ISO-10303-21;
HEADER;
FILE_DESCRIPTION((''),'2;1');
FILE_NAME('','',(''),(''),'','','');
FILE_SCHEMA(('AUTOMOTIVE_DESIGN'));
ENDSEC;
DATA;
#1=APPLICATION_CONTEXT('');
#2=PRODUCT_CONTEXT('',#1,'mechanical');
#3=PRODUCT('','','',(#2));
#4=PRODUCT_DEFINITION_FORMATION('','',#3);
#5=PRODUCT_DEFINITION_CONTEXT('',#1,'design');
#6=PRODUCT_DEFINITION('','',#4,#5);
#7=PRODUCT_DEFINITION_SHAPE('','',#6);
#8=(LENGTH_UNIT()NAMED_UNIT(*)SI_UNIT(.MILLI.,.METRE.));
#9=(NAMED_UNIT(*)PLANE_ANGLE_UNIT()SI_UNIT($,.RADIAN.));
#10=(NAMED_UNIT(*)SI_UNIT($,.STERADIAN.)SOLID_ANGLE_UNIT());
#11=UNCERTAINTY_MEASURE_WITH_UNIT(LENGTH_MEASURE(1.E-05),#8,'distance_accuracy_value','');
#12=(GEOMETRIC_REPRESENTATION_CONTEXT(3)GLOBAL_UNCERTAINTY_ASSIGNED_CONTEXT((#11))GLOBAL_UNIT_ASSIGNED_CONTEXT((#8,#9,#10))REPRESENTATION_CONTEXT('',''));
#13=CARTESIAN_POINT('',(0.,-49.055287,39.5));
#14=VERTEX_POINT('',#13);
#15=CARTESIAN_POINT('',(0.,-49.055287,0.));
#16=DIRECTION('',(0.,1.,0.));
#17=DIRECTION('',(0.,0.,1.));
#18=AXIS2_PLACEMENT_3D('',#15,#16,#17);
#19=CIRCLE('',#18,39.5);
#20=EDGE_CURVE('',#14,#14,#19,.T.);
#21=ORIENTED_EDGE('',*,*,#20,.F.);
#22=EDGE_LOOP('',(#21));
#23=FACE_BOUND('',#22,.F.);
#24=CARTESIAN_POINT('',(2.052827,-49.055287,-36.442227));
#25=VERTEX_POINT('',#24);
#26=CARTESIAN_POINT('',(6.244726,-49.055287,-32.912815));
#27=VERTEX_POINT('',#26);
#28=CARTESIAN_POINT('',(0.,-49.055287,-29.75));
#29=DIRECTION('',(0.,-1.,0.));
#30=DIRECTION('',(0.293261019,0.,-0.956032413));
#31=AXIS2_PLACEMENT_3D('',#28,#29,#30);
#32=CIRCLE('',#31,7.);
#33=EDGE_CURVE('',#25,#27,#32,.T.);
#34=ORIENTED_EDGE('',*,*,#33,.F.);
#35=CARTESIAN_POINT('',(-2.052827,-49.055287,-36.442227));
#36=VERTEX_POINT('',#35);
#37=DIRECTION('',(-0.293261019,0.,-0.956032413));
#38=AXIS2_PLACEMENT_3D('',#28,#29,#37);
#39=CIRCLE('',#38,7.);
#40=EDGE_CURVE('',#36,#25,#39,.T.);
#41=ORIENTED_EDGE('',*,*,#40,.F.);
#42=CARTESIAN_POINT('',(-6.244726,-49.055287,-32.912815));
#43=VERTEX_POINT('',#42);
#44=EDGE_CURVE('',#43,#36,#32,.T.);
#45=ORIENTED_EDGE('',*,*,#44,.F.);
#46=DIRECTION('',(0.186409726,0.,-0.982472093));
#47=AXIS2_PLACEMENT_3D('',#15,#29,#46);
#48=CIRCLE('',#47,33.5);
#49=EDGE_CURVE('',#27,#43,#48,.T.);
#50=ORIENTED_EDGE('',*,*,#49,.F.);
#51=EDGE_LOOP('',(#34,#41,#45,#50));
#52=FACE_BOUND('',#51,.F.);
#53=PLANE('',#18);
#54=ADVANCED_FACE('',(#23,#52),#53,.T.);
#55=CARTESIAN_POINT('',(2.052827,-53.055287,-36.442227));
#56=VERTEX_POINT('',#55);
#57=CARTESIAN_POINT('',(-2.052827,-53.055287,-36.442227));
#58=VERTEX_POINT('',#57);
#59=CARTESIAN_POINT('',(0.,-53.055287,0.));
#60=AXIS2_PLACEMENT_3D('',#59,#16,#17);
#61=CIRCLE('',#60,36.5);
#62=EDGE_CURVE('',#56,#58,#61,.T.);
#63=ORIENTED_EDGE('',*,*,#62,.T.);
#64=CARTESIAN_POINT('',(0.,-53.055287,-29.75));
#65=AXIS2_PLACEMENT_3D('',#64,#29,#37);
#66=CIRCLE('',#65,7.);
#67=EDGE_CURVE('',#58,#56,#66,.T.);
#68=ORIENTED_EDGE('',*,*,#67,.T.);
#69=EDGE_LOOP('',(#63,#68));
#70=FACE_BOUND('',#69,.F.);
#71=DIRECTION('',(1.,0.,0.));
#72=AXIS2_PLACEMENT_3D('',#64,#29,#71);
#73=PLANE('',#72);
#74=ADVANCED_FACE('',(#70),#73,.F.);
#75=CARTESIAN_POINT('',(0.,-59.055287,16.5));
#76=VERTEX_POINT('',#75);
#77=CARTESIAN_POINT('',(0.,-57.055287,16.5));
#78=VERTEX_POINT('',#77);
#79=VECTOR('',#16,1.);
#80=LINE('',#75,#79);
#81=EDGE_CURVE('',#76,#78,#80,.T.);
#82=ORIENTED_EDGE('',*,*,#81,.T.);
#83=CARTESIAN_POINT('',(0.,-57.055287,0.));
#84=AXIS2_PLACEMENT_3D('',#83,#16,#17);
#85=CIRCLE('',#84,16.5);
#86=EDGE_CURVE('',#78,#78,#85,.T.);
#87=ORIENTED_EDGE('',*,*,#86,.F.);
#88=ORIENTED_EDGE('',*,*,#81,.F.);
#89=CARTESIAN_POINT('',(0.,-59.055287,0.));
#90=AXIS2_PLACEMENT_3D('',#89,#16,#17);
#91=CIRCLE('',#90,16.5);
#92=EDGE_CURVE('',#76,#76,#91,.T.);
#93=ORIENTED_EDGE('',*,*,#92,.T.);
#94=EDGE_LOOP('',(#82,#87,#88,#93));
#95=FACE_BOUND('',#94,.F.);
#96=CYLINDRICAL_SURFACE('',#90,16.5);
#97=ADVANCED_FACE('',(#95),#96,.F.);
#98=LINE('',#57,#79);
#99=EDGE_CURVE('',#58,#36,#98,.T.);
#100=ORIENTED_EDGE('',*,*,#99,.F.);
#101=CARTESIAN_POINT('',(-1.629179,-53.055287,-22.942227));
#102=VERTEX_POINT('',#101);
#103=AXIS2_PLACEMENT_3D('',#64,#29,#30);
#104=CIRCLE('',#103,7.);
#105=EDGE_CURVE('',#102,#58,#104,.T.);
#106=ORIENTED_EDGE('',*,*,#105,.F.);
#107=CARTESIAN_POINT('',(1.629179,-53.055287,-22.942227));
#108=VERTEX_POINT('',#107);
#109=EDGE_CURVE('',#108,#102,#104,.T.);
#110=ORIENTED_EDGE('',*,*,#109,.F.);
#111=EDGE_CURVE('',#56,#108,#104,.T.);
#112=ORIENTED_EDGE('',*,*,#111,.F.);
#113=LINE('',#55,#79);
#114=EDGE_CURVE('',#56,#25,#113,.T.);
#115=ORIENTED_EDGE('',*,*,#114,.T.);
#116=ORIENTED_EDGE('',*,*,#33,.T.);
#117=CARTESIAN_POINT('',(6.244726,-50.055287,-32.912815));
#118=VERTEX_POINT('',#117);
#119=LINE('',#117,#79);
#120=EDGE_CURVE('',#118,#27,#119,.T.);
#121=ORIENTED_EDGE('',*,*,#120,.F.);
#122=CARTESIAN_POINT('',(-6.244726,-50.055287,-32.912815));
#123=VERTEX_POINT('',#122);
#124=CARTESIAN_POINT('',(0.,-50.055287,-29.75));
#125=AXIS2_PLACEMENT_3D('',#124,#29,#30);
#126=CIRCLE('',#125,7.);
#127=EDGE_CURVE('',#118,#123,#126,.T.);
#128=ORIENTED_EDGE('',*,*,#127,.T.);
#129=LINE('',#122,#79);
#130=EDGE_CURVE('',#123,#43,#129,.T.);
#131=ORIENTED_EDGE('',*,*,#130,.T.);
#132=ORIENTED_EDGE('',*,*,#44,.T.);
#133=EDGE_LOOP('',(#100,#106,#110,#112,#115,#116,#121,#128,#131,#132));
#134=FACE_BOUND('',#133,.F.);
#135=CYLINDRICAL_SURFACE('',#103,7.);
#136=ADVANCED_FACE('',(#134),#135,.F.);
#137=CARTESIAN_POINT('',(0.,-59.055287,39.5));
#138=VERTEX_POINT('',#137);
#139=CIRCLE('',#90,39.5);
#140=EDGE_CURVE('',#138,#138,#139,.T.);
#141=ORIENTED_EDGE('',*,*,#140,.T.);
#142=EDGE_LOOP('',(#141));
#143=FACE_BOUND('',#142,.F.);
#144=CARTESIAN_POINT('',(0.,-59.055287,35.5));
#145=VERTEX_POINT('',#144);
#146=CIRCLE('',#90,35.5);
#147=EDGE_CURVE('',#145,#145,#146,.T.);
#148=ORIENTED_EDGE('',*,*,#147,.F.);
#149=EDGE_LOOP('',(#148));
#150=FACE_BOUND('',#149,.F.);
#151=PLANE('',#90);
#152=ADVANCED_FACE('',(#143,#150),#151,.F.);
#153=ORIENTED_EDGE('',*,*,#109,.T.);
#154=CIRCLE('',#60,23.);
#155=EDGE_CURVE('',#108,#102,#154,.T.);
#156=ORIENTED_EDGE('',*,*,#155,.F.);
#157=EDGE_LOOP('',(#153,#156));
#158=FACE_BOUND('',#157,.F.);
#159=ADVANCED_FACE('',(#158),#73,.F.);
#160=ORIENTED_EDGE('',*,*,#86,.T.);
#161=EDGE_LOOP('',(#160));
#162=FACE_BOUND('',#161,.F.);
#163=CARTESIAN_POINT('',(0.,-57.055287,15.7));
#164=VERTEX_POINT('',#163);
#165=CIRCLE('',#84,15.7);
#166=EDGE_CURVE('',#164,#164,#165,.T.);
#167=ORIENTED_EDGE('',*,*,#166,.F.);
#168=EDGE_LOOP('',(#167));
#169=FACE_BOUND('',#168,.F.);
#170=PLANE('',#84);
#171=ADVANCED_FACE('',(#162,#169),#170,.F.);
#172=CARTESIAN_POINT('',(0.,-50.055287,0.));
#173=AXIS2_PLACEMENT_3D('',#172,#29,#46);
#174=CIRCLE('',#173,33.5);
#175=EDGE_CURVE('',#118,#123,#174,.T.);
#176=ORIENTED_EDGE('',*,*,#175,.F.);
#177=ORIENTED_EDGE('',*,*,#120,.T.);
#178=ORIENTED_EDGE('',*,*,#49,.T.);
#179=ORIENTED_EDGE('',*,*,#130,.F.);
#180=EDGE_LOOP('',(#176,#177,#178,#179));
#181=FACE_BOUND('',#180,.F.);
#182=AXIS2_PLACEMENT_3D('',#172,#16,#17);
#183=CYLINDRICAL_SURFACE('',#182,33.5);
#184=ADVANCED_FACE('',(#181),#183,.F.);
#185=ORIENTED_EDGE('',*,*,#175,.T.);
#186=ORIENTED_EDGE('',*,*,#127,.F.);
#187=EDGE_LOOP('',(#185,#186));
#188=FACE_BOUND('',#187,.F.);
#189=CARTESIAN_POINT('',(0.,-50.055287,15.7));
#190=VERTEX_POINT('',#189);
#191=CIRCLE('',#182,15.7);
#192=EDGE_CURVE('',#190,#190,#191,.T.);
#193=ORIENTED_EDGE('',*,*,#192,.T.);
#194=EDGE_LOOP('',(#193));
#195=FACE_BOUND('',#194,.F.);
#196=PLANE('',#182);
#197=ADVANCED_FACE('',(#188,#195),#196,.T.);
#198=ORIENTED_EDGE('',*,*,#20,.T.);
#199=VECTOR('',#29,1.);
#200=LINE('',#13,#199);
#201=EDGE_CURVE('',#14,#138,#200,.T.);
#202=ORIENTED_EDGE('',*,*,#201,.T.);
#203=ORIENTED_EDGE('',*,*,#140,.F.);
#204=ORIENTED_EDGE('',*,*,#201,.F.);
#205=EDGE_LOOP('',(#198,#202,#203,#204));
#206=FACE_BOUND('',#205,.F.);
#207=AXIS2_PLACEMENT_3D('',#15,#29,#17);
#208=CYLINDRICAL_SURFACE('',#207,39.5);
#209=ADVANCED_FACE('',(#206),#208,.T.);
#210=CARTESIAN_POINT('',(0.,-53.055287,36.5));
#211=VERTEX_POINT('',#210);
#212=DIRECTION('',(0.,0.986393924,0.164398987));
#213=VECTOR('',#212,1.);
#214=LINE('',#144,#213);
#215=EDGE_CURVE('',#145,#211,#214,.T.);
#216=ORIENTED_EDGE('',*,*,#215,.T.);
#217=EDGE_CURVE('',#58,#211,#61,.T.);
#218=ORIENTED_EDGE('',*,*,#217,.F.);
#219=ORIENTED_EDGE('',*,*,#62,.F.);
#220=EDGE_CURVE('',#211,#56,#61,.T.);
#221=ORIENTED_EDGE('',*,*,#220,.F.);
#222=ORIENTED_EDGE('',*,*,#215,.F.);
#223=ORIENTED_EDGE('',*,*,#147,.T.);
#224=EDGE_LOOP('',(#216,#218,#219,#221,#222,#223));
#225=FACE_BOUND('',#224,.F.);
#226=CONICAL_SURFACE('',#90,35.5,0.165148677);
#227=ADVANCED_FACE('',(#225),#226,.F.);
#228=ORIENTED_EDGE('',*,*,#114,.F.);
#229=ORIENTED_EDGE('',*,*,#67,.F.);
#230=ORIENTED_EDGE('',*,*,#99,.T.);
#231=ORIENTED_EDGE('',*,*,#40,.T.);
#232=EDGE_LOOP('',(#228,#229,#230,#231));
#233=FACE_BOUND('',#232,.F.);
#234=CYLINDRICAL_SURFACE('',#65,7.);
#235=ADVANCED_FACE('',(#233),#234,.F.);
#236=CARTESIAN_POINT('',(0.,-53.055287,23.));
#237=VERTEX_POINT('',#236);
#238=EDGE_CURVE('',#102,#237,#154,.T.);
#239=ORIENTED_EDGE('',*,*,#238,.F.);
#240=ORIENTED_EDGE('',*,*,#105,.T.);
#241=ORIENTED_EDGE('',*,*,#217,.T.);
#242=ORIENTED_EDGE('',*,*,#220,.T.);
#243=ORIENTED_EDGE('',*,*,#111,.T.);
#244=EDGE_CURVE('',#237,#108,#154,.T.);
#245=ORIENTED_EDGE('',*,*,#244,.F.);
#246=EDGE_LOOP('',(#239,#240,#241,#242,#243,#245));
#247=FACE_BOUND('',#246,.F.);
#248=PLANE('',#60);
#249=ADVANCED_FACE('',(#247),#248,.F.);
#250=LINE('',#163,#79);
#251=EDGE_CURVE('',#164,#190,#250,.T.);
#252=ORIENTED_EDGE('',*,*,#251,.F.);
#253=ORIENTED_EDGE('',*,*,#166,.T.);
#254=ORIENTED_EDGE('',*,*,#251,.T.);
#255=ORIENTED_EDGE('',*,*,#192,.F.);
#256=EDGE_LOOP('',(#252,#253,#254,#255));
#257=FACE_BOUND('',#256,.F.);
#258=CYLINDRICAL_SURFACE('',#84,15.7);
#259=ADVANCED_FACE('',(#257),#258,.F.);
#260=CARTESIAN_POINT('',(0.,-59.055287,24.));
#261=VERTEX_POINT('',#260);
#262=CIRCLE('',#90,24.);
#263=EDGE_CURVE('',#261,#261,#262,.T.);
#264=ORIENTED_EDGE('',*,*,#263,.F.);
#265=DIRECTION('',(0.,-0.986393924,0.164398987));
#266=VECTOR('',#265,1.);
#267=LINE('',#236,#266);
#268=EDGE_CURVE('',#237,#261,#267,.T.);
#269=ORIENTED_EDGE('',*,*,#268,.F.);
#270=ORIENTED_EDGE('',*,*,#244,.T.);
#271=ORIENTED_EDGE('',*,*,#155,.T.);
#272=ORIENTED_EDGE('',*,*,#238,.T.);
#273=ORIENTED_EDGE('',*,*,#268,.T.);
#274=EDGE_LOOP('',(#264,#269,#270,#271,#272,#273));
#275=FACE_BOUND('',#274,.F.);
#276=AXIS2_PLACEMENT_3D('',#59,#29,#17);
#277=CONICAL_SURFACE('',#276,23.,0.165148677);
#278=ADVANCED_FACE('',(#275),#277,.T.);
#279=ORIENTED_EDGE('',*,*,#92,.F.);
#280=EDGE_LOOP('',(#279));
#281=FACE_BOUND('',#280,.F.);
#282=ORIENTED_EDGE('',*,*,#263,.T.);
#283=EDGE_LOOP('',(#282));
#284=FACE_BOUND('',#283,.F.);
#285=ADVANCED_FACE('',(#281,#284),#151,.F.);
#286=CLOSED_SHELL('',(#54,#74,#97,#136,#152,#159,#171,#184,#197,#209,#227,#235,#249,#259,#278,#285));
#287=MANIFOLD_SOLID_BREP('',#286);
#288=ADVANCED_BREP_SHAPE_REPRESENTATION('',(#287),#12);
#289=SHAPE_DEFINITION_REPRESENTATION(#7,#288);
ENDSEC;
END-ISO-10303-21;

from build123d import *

# Parameters (mm, degrees)
F2_R     = 7
F3_DEPTH = 4.001


# Not quite as in the source:
# - a feature names something its author has since deleted; it is built from what else it names


with BuildPart() as f1:
    # F0 (on Right) → F1 (revolve)
    with BuildSketch(Plane.YZ):
        Polygon((-59.0552871114, 24), (-59.0552871114, 16.5), (-57.0552871114, 16.5), (-57.0552871114, 15.7), (-50.0552871114, 15.7), (-50.0552871114, 33.5), (-49.0552871114, 33.5), (-49.0552871114, 39.5), (-59.0552871114, 39.5), (-59.0552871114, 35.5), (-53.0552871114, 36.5), (-53.0552871114, 23), align=None)
    revolve(axis=Axis((0, -43.8180491328, 0), (0, 1, 0)))

    # F2 (on face) → F3 (cut, through all)
    with BuildSketch(Plane.XZ.offset(53.0552871114)):
        with Locations((0, -29.75)):
            Circle(F2_R)
        with BuildLine():
            ThreePointArc((-2.0528271341, -36.4422268908), (0, -36.75), (2.0528271341, -36.4422268908))
            ThreePointArc((2.0528271341, -36.4422268908), (0, -36.5), (-2.0528271341, -36.4422268908))
        make_face()
    extrude(amount=-F3_DEPTH, mode=Mode.SUBTRACT)


solid = f1.part
